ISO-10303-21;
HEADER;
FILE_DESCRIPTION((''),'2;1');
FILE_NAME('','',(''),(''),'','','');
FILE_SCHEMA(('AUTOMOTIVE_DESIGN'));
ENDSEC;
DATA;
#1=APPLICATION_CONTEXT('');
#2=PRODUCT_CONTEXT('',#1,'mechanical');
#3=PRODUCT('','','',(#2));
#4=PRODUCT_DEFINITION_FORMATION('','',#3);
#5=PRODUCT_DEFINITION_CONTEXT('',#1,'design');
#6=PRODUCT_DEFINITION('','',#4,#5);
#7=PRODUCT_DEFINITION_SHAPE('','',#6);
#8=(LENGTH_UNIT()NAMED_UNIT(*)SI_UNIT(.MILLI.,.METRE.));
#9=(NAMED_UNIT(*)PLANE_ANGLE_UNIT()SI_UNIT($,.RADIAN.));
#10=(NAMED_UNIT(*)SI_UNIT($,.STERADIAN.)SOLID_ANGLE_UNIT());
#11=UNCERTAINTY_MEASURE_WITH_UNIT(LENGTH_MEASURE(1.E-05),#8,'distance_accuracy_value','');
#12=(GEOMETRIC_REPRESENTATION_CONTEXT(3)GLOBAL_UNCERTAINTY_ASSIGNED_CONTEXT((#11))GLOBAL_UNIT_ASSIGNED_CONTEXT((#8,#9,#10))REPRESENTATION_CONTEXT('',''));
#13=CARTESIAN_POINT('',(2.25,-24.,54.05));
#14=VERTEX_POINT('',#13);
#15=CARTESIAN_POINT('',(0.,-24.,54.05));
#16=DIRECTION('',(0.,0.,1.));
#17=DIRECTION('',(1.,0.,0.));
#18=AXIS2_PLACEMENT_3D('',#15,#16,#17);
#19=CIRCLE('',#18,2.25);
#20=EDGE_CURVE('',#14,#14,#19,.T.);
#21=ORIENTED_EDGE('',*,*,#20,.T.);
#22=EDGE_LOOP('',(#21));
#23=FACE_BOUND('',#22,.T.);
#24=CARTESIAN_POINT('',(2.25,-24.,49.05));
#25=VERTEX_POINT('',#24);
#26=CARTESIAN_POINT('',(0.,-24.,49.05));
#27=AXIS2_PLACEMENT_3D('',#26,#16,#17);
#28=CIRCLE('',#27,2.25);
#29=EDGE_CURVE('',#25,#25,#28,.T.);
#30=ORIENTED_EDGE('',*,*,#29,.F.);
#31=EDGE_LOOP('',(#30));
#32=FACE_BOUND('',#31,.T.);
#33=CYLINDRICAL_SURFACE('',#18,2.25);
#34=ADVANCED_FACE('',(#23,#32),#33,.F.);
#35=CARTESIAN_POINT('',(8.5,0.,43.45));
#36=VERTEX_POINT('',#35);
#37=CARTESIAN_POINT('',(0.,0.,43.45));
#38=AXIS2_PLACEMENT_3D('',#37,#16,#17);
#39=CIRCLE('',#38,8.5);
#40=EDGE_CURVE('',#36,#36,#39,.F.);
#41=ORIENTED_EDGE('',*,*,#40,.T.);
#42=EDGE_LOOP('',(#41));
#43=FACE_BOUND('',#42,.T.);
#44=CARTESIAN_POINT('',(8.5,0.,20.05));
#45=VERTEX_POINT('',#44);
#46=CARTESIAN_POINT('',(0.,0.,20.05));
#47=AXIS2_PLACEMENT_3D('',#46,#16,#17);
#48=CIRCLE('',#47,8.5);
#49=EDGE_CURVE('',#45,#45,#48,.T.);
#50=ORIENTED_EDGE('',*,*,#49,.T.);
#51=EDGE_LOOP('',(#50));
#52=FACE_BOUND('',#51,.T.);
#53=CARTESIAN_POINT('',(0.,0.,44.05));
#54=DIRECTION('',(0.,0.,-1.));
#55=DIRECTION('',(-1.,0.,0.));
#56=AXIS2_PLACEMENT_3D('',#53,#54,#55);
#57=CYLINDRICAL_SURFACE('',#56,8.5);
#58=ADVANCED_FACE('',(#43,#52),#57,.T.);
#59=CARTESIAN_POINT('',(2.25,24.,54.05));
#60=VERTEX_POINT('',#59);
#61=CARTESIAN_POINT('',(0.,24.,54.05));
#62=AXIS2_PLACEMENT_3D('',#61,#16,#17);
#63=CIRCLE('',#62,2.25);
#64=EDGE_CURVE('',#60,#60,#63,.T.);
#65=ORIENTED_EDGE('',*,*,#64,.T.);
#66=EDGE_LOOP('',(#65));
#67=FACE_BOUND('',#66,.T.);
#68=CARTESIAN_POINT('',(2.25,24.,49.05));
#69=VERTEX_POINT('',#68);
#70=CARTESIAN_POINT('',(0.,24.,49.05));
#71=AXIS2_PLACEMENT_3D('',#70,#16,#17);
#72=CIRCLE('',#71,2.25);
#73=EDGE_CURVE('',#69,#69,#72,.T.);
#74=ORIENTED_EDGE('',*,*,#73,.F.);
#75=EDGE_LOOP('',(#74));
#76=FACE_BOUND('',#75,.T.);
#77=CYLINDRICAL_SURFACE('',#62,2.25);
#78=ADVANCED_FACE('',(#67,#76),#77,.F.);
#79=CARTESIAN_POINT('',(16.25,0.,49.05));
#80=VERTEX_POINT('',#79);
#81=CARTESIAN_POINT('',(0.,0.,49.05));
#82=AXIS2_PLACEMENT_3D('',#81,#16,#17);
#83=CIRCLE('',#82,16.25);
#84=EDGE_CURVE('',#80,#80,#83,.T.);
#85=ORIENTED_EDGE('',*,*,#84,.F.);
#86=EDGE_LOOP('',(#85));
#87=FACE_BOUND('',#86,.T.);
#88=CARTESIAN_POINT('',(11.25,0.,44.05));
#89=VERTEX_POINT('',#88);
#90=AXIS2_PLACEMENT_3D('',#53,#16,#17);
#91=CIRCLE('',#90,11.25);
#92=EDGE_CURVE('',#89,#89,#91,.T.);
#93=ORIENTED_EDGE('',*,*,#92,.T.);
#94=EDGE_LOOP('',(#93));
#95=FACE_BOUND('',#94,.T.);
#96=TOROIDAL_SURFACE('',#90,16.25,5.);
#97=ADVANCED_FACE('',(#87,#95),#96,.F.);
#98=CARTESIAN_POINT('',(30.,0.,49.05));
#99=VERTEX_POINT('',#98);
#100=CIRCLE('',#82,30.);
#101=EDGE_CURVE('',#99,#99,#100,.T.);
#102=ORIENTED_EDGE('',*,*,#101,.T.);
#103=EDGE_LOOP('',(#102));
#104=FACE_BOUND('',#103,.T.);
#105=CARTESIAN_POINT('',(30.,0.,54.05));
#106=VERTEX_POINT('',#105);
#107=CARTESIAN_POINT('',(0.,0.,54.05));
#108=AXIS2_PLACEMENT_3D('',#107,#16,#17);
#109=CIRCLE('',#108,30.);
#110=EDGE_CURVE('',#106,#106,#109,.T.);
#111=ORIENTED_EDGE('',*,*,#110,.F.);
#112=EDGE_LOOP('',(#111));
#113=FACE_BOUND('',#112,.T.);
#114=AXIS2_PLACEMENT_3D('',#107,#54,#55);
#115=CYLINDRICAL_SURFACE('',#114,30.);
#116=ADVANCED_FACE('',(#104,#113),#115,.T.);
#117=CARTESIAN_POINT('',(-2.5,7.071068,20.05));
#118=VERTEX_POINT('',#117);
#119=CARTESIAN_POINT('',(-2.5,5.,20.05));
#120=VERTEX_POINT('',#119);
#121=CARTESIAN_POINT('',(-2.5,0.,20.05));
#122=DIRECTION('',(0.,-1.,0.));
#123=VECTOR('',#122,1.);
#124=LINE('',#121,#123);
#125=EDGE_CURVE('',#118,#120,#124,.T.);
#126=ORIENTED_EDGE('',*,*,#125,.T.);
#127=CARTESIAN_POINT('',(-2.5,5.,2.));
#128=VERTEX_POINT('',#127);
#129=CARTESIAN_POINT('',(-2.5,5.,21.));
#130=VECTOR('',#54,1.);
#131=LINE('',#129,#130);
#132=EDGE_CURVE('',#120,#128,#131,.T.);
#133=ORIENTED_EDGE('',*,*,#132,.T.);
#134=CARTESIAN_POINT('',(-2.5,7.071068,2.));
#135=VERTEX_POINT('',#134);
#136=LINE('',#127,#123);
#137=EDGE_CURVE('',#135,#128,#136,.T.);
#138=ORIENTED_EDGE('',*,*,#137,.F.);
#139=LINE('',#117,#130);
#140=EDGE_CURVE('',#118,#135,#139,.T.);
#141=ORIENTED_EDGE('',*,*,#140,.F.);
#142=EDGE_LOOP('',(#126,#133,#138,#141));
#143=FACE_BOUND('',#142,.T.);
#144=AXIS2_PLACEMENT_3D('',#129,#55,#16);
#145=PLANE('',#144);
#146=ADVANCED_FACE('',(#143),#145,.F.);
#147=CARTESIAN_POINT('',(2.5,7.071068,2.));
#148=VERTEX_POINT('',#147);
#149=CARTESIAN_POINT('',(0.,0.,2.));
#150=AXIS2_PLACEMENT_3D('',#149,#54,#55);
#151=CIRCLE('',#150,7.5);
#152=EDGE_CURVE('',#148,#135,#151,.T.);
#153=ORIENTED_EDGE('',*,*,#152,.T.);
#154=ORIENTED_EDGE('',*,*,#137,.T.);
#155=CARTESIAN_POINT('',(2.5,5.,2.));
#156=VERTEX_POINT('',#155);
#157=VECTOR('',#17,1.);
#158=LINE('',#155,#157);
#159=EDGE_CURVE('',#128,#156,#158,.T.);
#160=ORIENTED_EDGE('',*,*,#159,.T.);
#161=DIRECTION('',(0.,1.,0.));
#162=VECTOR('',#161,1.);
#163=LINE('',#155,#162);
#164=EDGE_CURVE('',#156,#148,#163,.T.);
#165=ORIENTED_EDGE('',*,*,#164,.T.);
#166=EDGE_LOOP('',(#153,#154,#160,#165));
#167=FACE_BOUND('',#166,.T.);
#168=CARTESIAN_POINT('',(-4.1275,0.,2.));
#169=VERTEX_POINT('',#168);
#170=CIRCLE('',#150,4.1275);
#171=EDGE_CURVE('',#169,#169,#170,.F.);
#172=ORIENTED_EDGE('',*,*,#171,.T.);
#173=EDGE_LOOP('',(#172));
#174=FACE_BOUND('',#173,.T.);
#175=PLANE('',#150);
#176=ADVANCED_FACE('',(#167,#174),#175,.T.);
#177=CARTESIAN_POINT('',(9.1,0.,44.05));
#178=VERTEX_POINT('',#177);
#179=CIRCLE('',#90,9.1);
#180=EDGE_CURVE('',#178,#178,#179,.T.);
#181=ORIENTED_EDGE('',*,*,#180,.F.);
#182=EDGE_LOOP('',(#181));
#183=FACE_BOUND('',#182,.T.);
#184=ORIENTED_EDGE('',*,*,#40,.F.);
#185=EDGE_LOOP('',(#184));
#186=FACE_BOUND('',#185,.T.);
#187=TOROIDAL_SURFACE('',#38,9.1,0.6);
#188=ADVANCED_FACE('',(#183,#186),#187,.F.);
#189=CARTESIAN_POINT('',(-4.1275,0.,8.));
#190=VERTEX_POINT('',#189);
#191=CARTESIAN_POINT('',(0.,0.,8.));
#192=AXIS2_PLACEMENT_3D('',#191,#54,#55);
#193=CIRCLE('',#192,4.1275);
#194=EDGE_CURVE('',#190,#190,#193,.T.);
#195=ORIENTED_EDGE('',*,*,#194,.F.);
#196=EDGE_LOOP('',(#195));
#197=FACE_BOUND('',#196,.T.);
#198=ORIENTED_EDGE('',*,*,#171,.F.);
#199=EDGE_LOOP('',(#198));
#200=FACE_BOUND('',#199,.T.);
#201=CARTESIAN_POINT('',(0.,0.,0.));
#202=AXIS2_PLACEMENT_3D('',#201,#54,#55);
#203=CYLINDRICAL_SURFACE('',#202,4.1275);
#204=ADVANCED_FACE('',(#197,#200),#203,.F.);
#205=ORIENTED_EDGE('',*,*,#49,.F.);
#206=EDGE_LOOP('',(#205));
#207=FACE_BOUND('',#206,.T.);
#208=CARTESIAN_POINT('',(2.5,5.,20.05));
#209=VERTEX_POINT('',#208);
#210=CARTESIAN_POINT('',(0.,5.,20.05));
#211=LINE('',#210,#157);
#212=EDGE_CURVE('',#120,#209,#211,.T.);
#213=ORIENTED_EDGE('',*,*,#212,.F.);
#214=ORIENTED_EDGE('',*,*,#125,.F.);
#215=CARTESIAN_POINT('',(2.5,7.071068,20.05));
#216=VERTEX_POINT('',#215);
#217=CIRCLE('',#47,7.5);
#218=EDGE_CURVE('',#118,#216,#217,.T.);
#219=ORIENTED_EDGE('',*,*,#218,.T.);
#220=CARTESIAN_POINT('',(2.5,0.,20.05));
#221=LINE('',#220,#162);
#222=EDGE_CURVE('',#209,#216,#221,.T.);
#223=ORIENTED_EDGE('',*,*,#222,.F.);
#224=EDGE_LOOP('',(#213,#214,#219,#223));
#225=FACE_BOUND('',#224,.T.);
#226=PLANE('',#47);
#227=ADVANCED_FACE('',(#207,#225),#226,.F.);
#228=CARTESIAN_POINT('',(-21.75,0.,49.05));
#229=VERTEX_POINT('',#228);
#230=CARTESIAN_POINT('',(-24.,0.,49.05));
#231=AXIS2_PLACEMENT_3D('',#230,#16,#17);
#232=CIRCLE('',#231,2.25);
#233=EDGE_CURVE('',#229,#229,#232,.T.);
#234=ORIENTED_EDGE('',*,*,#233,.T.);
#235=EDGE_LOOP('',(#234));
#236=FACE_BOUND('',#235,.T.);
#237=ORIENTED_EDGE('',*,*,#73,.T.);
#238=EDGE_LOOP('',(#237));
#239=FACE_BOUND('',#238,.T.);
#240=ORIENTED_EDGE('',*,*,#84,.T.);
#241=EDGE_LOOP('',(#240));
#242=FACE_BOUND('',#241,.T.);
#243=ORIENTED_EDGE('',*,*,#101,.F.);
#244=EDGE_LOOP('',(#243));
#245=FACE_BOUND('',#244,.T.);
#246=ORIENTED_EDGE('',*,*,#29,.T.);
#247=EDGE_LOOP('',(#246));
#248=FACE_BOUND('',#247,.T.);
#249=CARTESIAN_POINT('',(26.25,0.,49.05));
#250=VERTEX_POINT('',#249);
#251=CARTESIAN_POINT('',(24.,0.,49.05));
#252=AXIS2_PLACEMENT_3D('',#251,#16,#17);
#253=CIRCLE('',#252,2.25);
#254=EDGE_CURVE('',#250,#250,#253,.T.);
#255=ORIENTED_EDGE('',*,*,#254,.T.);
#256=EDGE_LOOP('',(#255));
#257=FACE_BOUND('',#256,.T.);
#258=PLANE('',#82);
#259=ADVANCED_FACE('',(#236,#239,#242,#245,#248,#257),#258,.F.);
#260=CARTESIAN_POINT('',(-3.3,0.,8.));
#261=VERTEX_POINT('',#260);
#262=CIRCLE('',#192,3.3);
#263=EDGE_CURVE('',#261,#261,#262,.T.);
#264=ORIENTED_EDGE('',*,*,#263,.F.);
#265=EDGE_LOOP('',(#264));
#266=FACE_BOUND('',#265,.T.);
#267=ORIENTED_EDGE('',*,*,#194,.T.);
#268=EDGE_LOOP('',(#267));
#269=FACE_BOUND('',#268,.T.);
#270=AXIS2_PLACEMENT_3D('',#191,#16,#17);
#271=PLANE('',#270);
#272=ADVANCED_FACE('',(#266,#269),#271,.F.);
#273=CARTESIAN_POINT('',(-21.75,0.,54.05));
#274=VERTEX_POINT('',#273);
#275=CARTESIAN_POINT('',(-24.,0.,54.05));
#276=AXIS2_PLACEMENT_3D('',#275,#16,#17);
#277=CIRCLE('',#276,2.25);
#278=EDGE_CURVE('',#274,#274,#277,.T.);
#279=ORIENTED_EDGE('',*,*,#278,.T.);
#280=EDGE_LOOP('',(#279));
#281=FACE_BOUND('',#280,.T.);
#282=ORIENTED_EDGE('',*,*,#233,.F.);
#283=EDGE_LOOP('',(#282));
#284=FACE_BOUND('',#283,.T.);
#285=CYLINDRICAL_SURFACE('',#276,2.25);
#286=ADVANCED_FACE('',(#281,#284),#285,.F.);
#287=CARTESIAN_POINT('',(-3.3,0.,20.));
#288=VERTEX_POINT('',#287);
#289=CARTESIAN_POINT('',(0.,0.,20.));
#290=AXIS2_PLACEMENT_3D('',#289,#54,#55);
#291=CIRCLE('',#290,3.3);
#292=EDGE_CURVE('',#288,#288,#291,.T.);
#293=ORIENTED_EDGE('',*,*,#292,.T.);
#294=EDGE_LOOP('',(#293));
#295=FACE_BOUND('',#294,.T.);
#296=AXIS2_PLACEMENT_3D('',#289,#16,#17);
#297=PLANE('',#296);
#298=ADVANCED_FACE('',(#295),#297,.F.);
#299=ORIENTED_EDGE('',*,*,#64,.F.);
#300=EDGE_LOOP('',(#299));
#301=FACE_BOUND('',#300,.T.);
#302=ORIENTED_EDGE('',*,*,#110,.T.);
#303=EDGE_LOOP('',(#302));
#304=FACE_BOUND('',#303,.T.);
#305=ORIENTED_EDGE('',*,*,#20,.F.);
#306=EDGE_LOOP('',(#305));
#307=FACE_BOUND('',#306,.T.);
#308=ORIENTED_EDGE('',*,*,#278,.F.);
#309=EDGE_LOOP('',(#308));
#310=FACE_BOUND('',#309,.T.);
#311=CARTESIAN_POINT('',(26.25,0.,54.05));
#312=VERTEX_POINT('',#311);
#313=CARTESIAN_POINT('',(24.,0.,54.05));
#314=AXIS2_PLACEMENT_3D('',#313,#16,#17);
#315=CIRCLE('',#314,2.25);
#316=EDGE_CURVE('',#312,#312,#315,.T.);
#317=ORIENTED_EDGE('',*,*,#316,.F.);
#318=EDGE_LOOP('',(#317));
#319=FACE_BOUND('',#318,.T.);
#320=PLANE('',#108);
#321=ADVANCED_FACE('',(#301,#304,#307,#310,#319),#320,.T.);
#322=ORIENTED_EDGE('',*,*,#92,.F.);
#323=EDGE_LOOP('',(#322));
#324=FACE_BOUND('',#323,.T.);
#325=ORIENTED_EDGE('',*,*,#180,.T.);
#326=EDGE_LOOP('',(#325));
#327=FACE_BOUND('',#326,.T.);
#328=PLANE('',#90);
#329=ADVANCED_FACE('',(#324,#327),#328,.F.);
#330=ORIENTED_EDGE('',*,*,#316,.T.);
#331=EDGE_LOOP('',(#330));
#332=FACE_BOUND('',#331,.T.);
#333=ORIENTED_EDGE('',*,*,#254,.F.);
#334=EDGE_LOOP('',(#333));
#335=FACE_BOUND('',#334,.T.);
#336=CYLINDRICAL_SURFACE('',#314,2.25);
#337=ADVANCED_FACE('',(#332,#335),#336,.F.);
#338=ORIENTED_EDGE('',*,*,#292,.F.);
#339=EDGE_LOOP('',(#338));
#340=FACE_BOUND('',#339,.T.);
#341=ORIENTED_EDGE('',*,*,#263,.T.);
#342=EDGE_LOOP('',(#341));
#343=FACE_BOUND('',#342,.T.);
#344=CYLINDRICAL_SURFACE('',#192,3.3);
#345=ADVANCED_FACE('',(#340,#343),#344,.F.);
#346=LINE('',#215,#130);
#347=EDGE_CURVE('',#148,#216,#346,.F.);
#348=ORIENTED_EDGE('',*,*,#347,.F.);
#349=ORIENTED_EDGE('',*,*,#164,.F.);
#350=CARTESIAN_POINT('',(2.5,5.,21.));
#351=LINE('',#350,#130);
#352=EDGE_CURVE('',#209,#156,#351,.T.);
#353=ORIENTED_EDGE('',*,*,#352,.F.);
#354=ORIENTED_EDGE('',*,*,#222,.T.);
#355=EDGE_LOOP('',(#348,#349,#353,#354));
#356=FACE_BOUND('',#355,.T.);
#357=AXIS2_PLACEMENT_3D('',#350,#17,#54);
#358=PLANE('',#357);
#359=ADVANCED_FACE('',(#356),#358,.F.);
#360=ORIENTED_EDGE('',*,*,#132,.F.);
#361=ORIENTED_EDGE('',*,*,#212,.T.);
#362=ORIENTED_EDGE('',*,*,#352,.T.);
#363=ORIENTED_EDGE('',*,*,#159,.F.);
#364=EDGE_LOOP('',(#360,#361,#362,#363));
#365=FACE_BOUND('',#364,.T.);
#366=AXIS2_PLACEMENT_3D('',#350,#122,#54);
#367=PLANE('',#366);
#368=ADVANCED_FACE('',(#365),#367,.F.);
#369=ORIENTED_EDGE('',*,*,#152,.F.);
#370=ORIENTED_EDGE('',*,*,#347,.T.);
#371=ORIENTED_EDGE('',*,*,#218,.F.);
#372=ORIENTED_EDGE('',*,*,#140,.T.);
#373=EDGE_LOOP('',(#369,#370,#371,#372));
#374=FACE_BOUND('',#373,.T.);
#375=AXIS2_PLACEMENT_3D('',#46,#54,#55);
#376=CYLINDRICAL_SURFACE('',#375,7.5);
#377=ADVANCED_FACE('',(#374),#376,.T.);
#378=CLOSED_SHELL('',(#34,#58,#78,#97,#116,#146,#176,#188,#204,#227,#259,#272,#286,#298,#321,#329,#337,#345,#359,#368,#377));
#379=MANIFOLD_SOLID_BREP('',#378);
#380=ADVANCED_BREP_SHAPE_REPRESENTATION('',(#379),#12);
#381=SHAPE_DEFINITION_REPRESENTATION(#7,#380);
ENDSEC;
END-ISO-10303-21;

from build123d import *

# Parameters (mm, degrees)
SKETCH1_R                 = 7.5
BOSS_EXTRUDE1_DEPTH       = 20.05
SKETCH3_W                 = 5
SKETCH3_H                 = 5
CUT_EXTRUDE1_DEPTH        = 21
SKETCH6_R                 = 8.5
BOSS_EXTRUDE2_DEPTH       = 24
SKETCH7_R                 = 11.25
BOSS_EXTRUDE3_DEPTH       = 5
SKETCH8_R                 = 30
BOSS_EXTRUDE4_DEPTH       = 5
FILLET1_R                 = 0.6
FILLET2_R                 = 5
M4_CLEARANCE_HOLE1_D      = 4.5
F_1_0MM_DOWEL_HOLE1_D     = 8.255
F_1_0MM_DOWEL_HOLE1_DEPTH = 8
SKETCH13_R                = 7.5
CUT_EXTRUDE2_DEPTH        = 2
M6_CLEARANCE_HOLE1_D      = 6.6
M6_CLEARANCE_HOLE1_DEPTH  = 12


with BuildPart() as part:
    # Sketch1 → Boss-Extrude1 (new body)
    with BuildSketch(Plane.XY):
        Circle(SKETCH1_R)
    extrude(amount=BOSS_EXTRUDE1_DEPTH)

    # Sketch3 → Cut-Extrude1 (cut)
    with BuildSketch(Plane(origin=(0, 0, 0), x_dir=(-1, 0, 0), z_dir=(0, 0, -1))):
        with Locations((0, 7.5)):
            Rectangle(SKETCH3_W, SKETCH3_H)
    extrude(amount=-CUT_EXTRUDE1_DEPTH, mode=Mode.SUBTRACT)

    # Sketch6 → Boss-Extrude2 (add)
    with BuildSketch(Plane.XY.offset(20.05)):
        Circle(SKETCH6_R)
    extrude(amount=BOSS_EXTRUDE2_DEPTH)

    # Sketch7 → Boss-Extrude3 (add)
    with BuildSketch(Plane.XY.offset(44.05)):
        Circle(SKETCH7_R)
    extrude(amount=BOSS_EXTRUDE3_DEPTH)

    # Sketch8 → Boss-Extrude4 (add)
    with BuildSketch(Plane.XY.offset(49.05)):
        Circle(SKETCH8_R)
    extrude(amount=BOSS_EXTRUDE4_DEPTH)

    # Fillet1
    fillet1_edges = [part.edges().sort_by_distance(p)[0] for p in [
        (-8.5, 0, 44.05),
    ]]
    fillet(fillet1_edges, radius=FILLET1_R)

    # Fillet2
    fillet2_edges = [part.edges().sort_by_distance(p)[0] for p in [
        (-11.25, 0, 49.05),
    ]]
    fillet(fillet2_edges, radius=FILLET2_R - 0.0001)  # a hair under: the kernel refuses the full size

    # M4 Clearance Hole1 (through all)
    with Locations(Plane.XY.offset(54.05)):
        with Locations((0, 24), (0, -24), (24, 0), (-24, 0)):
            Hole(M4_CLEARANCE_HOLE1_D / 2)

    # Ø1.0mm Dowel Hole1
    with Locations(Plane(origin=(0, 0, 0), x_dir=(-1, 0, 0), z_dir=(0, 0, -1))):
        with Locations((0, 0)):
            Hole(F_1_0MM_DOWEL_HOLE1_D / 2, depth=F_1_0MM_DOWEL_HOLE1_DEPTH)

    # Sketch13 → Cut-Extrude2 (cut)
    with BuildSketch(Plane(origin=(0, 0, 0), x_dir=(-1, 0, 0), z_dir=(0, 0, -1))):
        Circle(SKETCH13_R)
    extrude(amount=-CUT_EXTRUDE2_DEPTH, mode=Mode.SUBTRACT)

    # M6 Clearance Hole1
    with Locations(Plane(origin=(0, 0, 8), x_dir=(-1, 0, 0), z_dir=(0, 0, -1))):
        with Locations((0, 0)):
            Hole(M6_CLEARANCE_HOLE1_D / 2, depth=M6_CLEARANCE_HOLE1_DEPTH)


solid = part.part
